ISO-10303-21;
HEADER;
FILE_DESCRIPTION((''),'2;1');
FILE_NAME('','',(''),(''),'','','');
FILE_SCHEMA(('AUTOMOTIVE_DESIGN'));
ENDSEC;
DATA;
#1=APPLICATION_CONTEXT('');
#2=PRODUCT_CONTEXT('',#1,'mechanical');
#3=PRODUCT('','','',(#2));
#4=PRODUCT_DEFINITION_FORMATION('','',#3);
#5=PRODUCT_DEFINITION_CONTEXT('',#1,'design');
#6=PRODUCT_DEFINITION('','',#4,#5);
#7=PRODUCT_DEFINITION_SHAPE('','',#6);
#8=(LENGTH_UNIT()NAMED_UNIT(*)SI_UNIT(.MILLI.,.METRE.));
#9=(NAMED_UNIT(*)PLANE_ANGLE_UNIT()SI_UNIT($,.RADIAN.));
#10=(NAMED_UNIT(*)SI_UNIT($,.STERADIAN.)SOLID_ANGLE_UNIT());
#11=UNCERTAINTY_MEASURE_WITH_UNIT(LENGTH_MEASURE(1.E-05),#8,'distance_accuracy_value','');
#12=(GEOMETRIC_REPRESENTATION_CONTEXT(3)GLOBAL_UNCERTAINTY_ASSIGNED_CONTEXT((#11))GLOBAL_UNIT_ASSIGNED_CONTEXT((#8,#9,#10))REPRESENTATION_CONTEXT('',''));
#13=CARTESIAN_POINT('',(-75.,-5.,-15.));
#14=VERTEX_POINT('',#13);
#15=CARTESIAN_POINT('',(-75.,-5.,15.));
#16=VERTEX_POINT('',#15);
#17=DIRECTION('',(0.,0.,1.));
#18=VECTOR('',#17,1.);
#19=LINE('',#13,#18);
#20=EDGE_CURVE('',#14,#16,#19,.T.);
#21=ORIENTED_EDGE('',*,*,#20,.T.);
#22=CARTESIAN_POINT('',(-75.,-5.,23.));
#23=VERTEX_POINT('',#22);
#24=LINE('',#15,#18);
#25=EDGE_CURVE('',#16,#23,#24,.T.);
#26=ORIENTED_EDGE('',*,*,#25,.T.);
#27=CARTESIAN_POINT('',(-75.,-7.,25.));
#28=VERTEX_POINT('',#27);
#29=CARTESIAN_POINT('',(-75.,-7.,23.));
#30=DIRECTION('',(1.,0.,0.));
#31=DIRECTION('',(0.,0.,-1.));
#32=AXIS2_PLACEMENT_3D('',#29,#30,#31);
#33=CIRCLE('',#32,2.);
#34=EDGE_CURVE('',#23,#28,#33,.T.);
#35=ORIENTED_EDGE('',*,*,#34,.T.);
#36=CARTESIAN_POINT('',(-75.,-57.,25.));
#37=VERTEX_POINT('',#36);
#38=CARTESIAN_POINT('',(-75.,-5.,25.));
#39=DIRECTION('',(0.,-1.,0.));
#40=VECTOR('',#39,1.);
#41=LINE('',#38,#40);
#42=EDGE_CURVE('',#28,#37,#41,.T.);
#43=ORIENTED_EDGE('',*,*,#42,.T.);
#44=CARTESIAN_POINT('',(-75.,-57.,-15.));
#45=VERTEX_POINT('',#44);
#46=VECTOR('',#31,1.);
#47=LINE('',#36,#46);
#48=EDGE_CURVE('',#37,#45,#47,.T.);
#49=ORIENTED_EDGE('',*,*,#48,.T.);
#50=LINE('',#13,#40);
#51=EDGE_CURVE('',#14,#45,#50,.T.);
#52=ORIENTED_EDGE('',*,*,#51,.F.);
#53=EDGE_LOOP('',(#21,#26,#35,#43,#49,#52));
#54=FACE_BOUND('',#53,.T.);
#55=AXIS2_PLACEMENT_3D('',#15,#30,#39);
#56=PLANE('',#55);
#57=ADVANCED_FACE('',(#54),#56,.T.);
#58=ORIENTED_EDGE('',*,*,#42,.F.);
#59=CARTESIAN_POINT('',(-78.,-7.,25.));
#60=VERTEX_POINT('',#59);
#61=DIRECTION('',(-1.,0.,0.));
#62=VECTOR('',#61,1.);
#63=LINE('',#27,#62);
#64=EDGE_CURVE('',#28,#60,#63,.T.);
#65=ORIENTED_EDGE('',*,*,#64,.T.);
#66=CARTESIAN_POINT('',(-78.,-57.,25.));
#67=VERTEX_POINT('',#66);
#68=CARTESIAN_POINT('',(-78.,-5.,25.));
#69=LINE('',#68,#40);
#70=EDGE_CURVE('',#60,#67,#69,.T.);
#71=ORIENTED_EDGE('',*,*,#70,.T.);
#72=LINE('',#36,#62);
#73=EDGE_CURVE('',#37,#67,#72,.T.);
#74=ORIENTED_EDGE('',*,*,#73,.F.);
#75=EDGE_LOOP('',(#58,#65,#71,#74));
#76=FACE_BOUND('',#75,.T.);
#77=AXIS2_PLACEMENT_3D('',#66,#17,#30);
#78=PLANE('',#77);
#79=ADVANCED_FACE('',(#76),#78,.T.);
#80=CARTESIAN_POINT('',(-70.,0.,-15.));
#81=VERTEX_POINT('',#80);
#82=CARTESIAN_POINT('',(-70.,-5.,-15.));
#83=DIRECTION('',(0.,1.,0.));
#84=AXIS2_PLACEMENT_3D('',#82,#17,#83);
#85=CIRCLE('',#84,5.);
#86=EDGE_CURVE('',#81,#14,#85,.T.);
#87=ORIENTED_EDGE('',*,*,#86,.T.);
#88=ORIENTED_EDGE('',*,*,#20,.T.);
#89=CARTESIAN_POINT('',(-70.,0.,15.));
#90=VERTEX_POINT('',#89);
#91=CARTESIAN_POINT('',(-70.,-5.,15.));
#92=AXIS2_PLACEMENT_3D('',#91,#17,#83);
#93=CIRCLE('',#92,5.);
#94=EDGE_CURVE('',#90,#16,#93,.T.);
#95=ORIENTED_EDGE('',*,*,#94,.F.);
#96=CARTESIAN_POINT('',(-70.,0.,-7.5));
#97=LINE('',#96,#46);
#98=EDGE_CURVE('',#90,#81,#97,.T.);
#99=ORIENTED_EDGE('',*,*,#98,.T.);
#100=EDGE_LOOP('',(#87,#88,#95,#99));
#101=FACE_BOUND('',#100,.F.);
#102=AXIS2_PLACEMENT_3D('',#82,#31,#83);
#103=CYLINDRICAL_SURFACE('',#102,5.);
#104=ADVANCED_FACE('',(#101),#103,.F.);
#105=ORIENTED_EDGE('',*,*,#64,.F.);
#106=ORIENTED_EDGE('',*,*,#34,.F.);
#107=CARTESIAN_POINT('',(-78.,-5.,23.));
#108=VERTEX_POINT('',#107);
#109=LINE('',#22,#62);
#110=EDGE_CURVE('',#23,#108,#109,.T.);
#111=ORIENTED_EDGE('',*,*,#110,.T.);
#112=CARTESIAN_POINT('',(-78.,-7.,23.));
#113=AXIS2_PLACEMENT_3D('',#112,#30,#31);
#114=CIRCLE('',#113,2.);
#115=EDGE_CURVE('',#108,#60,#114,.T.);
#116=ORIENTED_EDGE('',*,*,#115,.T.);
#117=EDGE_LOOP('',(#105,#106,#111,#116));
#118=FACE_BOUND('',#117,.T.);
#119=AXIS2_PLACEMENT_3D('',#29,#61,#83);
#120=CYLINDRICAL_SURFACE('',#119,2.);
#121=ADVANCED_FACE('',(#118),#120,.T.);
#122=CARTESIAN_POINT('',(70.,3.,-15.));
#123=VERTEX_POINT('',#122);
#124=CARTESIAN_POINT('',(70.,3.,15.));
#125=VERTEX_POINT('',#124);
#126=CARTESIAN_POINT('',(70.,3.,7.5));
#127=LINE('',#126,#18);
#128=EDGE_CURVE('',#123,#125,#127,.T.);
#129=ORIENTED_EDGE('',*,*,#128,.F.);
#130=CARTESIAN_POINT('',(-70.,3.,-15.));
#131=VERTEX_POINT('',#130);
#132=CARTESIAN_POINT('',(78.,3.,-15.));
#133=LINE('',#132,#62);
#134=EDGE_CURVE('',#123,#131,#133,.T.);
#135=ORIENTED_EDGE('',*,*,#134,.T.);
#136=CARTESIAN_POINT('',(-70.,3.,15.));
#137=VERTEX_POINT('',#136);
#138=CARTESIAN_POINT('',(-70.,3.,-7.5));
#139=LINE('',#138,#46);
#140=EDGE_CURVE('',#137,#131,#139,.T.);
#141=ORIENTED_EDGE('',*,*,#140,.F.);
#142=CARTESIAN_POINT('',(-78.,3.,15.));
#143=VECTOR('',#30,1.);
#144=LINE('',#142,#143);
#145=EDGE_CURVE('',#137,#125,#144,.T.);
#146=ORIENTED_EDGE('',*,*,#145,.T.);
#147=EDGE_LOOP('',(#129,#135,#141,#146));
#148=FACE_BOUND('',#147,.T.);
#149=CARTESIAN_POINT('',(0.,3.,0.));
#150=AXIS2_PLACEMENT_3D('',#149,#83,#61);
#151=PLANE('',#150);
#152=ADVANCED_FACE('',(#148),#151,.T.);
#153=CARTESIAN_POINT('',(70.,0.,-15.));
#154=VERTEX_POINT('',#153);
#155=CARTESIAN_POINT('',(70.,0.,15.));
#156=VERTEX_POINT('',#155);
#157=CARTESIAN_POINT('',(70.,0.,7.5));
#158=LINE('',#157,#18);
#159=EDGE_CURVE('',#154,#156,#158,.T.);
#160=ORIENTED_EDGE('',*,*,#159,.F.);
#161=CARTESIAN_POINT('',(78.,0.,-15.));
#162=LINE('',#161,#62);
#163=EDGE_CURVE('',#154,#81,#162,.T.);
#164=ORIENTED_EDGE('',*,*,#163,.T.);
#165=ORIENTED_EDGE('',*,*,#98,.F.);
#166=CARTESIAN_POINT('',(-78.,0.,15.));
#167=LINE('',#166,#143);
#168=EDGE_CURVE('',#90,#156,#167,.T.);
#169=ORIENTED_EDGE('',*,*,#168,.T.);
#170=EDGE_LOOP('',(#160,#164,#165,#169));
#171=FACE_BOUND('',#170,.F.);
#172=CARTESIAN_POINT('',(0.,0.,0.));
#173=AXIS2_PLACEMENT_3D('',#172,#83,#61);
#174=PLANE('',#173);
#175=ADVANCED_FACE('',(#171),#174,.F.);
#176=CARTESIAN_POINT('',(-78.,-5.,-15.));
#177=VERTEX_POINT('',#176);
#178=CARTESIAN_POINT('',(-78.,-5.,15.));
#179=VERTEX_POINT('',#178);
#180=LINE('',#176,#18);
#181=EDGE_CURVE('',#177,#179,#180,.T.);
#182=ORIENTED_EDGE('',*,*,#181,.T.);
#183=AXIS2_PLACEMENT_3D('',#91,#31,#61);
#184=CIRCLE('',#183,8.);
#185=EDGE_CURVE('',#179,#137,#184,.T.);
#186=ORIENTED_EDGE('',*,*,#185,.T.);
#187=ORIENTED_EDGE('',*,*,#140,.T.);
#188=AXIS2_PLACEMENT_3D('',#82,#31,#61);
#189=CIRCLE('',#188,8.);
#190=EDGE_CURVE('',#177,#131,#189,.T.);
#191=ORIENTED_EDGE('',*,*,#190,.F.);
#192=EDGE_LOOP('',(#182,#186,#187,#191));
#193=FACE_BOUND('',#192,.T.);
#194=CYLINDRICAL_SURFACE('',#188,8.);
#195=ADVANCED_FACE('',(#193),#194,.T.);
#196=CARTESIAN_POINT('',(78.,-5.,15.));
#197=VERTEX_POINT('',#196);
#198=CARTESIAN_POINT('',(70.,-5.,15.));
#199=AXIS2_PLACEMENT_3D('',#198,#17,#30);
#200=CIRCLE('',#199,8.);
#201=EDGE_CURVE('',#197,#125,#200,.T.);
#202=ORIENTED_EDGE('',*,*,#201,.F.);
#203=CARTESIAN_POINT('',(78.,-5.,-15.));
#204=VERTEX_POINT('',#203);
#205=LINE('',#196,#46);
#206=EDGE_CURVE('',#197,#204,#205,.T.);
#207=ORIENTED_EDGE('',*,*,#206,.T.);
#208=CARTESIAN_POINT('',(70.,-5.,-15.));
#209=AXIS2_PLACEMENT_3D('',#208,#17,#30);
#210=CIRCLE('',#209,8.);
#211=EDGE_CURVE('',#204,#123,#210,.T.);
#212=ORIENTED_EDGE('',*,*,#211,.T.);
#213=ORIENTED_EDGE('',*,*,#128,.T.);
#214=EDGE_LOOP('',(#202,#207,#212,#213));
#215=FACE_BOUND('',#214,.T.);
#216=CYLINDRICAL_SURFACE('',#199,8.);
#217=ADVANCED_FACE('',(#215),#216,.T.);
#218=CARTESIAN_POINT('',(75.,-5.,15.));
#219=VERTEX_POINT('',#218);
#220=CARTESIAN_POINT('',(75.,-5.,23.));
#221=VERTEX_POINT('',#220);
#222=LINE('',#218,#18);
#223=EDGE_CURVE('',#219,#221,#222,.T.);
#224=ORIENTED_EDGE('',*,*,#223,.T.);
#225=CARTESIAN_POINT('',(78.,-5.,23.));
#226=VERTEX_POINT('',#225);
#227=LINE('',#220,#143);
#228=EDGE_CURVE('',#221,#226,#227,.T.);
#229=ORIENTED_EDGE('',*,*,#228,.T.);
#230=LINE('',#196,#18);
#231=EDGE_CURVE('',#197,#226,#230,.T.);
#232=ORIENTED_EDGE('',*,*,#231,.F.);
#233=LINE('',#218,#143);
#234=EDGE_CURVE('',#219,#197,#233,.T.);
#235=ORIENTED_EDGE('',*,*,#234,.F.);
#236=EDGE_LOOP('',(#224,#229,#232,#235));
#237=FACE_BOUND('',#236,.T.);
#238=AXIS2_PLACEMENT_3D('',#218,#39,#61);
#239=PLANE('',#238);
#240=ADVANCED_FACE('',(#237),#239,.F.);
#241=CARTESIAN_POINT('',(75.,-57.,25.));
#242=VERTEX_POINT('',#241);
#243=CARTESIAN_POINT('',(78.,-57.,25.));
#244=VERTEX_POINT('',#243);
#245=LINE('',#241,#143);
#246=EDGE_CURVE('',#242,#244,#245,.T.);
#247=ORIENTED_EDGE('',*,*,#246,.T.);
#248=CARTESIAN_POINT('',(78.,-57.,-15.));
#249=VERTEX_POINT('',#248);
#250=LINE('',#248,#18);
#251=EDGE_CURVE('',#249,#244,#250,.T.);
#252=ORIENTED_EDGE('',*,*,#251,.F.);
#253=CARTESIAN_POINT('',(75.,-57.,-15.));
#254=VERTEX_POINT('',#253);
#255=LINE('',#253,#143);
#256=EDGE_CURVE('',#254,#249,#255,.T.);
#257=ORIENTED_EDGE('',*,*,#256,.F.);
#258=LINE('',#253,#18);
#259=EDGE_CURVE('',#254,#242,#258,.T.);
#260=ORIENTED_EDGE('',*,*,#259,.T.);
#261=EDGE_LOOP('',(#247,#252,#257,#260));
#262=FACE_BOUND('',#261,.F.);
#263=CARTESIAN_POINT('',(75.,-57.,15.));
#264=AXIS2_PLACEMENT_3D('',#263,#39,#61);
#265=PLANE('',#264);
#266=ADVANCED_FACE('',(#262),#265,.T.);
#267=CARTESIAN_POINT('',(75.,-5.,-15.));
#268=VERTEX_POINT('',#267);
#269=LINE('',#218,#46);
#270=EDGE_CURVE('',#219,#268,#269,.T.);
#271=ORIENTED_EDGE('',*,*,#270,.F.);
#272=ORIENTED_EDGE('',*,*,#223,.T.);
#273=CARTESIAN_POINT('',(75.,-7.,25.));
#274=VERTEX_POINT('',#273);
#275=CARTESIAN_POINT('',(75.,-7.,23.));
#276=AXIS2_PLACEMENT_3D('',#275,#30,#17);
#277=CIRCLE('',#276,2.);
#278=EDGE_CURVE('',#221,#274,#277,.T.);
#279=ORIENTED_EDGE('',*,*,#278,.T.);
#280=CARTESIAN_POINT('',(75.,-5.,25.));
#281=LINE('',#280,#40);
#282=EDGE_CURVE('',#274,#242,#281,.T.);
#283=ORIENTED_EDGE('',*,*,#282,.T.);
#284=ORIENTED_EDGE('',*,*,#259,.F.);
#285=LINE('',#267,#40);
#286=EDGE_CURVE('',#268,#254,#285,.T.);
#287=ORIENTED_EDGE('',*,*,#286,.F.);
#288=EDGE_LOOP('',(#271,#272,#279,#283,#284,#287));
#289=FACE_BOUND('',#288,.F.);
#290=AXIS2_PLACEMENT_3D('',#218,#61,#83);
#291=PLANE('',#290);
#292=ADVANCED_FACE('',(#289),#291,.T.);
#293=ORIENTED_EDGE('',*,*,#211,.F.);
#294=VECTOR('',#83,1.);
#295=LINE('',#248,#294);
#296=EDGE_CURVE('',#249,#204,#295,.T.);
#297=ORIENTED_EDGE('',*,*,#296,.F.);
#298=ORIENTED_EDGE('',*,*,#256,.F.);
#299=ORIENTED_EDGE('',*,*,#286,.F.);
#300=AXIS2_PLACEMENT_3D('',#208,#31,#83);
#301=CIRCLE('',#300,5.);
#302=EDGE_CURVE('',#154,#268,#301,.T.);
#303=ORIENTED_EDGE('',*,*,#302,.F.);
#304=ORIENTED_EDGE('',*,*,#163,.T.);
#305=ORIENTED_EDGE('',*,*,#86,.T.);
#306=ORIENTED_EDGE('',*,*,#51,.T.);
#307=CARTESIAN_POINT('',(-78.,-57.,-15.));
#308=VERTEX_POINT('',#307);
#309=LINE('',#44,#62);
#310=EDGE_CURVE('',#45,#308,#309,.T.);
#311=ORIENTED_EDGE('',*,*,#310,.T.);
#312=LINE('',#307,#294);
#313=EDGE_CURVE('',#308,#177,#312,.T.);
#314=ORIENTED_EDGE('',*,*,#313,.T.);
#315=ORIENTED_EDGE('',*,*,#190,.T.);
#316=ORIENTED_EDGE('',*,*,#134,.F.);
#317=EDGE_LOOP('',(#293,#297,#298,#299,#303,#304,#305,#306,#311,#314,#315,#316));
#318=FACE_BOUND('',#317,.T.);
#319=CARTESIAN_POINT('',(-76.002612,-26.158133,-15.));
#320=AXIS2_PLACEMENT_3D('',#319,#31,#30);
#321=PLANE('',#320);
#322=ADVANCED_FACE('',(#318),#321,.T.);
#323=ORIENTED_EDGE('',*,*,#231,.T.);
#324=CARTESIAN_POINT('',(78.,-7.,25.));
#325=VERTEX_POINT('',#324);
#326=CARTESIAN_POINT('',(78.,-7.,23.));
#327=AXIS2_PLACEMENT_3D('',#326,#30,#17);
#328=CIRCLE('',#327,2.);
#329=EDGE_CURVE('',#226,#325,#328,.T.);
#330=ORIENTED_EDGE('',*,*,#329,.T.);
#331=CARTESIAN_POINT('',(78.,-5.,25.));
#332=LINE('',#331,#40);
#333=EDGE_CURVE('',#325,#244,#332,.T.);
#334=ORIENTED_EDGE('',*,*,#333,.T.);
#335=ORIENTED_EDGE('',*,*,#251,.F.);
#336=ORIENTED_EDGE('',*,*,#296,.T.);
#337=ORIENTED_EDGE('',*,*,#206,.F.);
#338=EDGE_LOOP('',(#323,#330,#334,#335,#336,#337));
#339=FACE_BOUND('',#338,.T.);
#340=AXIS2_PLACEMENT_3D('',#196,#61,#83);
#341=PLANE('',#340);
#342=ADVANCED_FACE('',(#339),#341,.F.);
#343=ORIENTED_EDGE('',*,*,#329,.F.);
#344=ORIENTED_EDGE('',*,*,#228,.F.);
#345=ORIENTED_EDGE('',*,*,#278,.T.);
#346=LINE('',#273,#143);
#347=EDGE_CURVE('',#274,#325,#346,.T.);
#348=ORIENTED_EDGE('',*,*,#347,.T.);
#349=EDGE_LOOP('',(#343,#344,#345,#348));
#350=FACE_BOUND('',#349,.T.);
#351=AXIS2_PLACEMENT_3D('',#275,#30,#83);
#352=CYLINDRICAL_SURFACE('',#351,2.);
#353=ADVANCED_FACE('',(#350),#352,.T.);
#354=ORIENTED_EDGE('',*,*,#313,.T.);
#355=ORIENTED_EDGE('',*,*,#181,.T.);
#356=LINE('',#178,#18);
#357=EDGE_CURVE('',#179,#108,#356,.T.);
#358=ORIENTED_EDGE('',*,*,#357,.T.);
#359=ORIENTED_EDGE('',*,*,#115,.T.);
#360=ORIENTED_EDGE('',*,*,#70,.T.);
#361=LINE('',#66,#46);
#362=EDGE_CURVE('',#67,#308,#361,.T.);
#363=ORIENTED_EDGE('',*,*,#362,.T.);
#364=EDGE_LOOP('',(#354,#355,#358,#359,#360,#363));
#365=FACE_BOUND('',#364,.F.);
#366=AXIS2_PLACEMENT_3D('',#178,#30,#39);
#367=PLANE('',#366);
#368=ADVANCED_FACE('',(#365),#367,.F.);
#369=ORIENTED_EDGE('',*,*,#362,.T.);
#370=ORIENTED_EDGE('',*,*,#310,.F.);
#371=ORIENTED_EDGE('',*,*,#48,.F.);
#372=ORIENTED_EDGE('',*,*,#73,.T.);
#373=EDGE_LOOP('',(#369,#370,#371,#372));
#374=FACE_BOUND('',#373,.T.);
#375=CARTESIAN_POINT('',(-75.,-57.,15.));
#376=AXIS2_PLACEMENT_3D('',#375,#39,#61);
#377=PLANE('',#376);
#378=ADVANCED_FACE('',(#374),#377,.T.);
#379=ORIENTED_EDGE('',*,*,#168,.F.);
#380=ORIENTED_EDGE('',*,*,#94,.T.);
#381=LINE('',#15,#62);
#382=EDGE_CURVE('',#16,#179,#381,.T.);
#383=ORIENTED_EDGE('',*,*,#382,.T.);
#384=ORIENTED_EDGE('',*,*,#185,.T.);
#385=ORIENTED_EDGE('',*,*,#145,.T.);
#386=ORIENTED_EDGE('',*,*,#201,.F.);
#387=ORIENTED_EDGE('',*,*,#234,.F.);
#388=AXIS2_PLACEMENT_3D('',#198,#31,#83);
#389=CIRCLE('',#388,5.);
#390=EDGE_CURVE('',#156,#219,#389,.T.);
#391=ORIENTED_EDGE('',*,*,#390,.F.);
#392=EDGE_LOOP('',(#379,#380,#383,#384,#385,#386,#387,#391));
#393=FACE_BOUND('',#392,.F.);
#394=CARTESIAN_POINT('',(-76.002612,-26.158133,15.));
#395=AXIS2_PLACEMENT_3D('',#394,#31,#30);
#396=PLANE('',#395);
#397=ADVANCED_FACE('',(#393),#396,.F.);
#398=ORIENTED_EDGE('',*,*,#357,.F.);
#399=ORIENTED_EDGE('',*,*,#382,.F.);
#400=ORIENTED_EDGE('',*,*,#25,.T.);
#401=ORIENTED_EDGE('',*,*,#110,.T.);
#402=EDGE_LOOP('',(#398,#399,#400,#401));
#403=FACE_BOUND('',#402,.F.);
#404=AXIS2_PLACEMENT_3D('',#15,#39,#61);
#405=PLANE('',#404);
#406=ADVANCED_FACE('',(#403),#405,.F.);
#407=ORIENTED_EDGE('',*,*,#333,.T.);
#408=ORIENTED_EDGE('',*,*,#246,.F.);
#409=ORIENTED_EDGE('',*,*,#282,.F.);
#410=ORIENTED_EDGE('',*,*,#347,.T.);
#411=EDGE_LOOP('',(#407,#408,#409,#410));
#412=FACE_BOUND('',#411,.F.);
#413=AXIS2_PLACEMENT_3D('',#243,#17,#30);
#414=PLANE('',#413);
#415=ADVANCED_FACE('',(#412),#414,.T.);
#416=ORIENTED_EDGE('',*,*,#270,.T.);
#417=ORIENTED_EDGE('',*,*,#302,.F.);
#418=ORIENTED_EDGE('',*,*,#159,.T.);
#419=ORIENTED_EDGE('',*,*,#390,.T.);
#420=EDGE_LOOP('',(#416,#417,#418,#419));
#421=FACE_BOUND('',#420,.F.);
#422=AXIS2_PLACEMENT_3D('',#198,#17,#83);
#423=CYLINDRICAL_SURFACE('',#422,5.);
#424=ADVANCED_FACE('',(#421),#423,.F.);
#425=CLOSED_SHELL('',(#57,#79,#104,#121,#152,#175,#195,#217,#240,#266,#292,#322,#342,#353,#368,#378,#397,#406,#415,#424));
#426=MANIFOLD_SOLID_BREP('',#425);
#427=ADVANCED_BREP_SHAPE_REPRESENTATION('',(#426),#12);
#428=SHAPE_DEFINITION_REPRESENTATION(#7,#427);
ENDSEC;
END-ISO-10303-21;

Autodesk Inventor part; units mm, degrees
ref_plane "YZ Plane" through (0, 0, 0) normal (1, 0, 0) x (0, 1, 0)
ref_plane "XZ Plane" through (0, 0, 0) normal (0, 1, 0) x (-1, 0, 0)
ref_plane "XY Plane" through (0, 0, 0) normal (0, 0, 1) x (1, 0, 0)
sketch "Sketch1" plane through (0, 0, 0) normal (0, 1, 0) x (-1, 0, 0)
  line L0 (78, 15) -> (-78, 15)
  line L1 (-78, 15) -> (-78, -15)
  line L2 (-78, -15) -> (78, -15)
  line L3 (78, -15) -> (78, 15)
  line L4 (78, 15) -> (-78, -15) construction
  line L5 (-78, 15) -> (78, -15) construction
  point P0 (0, 0)
  dimension "d37" = 156
  dimension "d38" = 30
extrude "Plate1" add sketch "Sketch1" along normal blind 3
sketch "Sketch4" plane through (-75, 3, -15) normal (-1, 0, 0) x (0, -1, 0)
  line L0 (0, 30) -> (0, 0)
  line L1 (0, 0) -> (60, 0)
  line L2 (60, 0) -> (60, 30)
  line L3 (60, 30) -> (0, 30)
edge flange "Flange1" height 60 angle 90 thickness 3 bend radius 5 thickness toward (-1, 0, 0) relief round relief width 3 relief depth 1.5 corner gap 5 corner form 0 edges at (-78, 0, 0) (78, 0, 0) wall of the first edge with corners at (-75, 3, 15) (-75, 3, -15) (-75, -57, -15) (-75, -57, 15)
bend "Bend1"
corner "Corner1"
sketch "Sketch5" plane through (-78, -57, 15) normal (0, 0, 1) x (1, 0, 0)
  line L0 (3, 52) -> (0, 52) projected
  line L1 (0, 52) -> (0, 0) projected
  line L2 (3, 0) -> (0, 0) projected
  line L3 (3, 52) -> (3, 0) projected
  point P0 (78, 57)
extrude "Extrusion2" add sketch "Sketch5" along normal blind 10
mirror "Mirror1" about plane through (0, 0, 0) normal (1, 0, 0) of "Extrusion2"
fillet "Fillet1" radius 2 2 edges at (76.5, -5, 25) (-76.5, -5, 25)
equation "\"d6\" = Thickness"
equation "\"d39\" = BendReliefWidth"
equation "\"d40\" = BendReliefDepth"
equation "\"d41\" = MinimumRemnant"
equation "\"d42\" = TransitionRadius"
equation "\"d45\" = BendRadius"
equation "\"d46\" = CornerReliefSize"
equation "\"d47\" = GapSize"
equation "\"d48\" = JacobiRadiusSize"
equation "\"BendReliefWidth\" = Thickness"
equation "\"BendReliefDepth\" = 0.5 * Thickness"
equation "\"CornerReliefSize\" = 4 * Thickness"
equation "\"MinimumRemnant\" = 2 * Thickness"
equation "\"TransitionRadius\" = BendRadius"
equation "\"JacobiRadiusSize\" = BendRadius"
equation "\"GapSize\" = Thickness"
equation "\"Thickness\" = 3"
equation "\"BendRadius\" = 5"
properties part number "MSC 923 step" material "Stainless Steel"
